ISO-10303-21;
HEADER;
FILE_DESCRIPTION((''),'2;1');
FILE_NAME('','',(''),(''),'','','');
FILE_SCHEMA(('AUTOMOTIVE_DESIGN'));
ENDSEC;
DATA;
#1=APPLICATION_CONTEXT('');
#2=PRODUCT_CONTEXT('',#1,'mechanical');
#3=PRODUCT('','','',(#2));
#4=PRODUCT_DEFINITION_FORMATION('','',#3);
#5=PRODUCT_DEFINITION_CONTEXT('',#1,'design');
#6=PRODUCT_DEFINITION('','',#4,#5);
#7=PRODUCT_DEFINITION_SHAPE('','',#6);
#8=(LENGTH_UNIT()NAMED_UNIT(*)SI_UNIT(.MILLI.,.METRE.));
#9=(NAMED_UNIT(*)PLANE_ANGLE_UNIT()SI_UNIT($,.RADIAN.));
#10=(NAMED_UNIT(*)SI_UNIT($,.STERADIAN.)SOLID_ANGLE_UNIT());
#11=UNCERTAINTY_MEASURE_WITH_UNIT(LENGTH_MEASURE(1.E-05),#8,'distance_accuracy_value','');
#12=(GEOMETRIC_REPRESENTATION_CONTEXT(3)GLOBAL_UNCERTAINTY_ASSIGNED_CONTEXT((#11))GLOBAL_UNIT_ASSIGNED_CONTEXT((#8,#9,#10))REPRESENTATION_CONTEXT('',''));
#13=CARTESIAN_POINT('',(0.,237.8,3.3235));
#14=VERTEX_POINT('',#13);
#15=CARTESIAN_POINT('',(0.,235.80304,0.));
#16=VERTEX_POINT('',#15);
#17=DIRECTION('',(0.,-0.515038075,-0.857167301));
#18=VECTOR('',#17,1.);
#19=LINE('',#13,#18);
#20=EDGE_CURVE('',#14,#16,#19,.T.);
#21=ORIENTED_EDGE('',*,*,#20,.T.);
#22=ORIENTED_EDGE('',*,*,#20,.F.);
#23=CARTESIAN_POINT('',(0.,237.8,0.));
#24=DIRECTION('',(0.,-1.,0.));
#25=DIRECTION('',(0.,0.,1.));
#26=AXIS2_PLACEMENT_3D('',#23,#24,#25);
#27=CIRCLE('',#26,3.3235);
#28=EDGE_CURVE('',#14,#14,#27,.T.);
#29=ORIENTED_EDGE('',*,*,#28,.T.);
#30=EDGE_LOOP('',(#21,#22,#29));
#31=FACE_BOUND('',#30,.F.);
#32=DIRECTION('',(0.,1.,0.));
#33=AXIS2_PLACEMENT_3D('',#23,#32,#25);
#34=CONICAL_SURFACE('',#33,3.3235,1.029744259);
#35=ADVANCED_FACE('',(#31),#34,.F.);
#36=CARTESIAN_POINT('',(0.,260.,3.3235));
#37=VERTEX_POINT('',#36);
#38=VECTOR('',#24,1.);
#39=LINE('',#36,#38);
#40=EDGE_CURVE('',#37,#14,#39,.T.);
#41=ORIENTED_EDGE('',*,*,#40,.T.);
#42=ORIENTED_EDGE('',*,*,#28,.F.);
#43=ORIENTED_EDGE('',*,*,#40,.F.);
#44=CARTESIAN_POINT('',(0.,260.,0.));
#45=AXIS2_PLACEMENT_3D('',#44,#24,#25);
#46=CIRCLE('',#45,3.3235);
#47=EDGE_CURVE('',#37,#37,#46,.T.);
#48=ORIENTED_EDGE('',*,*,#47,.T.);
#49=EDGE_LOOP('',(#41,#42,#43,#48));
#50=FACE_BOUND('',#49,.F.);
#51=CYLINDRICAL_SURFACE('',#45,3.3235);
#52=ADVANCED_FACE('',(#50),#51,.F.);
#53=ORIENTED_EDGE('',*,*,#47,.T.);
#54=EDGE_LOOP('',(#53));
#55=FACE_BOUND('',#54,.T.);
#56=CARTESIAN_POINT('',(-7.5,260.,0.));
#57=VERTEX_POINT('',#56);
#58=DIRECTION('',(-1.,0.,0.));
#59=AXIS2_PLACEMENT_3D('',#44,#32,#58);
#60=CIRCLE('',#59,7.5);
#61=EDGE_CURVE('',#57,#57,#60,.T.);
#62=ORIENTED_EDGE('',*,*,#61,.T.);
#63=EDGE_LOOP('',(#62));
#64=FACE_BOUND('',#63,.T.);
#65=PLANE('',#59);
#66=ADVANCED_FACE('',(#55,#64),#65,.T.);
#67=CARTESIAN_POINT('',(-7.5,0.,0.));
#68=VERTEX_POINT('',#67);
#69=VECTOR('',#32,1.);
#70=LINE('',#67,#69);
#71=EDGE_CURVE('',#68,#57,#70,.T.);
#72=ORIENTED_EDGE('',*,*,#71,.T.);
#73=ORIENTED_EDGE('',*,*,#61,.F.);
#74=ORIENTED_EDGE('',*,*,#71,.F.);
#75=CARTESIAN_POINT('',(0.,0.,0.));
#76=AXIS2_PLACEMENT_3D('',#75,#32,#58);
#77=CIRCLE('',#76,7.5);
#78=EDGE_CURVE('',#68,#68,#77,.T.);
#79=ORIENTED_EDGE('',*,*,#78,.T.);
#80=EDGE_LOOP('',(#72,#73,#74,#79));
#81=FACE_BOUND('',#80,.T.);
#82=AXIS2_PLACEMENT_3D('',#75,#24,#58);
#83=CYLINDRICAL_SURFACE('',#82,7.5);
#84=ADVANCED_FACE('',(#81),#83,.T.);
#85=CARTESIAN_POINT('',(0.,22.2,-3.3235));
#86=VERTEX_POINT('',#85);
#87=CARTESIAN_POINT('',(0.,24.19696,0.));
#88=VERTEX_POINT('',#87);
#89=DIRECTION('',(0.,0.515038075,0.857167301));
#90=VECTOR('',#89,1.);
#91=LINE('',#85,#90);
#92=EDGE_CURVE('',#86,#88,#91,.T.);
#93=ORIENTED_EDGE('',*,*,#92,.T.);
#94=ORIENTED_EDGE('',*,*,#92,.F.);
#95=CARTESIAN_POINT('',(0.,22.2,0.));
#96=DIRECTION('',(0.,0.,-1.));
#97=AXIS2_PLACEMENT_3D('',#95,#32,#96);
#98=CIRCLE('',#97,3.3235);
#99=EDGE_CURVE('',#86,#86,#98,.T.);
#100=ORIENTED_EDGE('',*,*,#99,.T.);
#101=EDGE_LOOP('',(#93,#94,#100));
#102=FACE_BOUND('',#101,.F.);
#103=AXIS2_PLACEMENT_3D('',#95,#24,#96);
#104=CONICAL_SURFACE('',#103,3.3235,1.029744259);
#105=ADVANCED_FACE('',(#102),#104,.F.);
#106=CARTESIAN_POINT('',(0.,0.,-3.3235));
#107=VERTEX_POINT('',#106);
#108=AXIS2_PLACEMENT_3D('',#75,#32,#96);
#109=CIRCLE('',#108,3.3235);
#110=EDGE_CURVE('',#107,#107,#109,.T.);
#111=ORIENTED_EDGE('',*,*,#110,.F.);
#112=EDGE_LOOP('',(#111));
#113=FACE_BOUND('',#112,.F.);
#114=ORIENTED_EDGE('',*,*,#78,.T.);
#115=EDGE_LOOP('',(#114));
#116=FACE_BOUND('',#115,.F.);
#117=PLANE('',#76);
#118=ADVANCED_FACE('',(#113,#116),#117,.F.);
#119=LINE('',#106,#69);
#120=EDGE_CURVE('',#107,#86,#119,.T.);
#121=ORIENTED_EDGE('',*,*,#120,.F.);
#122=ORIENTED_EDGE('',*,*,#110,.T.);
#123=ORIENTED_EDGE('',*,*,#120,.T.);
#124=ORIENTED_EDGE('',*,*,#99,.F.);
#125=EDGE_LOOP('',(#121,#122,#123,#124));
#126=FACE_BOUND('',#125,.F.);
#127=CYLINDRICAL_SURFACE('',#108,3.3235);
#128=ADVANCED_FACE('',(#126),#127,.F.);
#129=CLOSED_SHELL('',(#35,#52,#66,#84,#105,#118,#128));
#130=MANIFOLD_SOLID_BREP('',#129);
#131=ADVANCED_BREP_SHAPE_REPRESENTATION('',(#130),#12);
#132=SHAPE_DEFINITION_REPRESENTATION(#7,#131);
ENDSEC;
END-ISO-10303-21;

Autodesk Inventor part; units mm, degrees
ref_plane "YZ Plane" through (0, 0, 0) normal (1, 0, 0) x (0, 1, 0)
ref_plane "XZ Plane" through (0, 0, 0) normal (0, 1, 0) x (-1, 0, 0)
ref_plane "XY Plane" through (0, 0, 0) normal (0, 0, 1) x (1, 0, 0)
sketch "Sketch1" plane through (0, 0, 0) normal (0, 1, 0) x (-1, 0, 0)
  circle A0 centre (0, 0) radius 7.5
  dimension "d0" = 15
extrude "Extrusion1" add sketch "Sketch1" along normal blind 260
sketch "Sketch2" plane through (0, 260, 0) normal (0, 1, 0) x (1, 0, 0)
  point P0 (0, 0)
  point P1 (0, 0)
hole "Hole1" at (0, 260, 0) direction (0, -1, 0) diameter 6.647 depth 22.2 tip angle 118 thread size "M8x1.25" class "6H" standard "ISO Metric profile"
sketch "Sketch3" plane through (0, 0, 0) normal (0, -1, 0) x (1, 0, 0)
  point P0 (0, 0)
  point P1 (0, 0)
hole "Hole2" at (0, 0, 0) direction (0, 1, 0) diameter 6.647 depth 22.2 tip angle 118 thread size "M8x1.25" class "6H" standard "ISO Metric profile"
properties part number "Structure_bar"
